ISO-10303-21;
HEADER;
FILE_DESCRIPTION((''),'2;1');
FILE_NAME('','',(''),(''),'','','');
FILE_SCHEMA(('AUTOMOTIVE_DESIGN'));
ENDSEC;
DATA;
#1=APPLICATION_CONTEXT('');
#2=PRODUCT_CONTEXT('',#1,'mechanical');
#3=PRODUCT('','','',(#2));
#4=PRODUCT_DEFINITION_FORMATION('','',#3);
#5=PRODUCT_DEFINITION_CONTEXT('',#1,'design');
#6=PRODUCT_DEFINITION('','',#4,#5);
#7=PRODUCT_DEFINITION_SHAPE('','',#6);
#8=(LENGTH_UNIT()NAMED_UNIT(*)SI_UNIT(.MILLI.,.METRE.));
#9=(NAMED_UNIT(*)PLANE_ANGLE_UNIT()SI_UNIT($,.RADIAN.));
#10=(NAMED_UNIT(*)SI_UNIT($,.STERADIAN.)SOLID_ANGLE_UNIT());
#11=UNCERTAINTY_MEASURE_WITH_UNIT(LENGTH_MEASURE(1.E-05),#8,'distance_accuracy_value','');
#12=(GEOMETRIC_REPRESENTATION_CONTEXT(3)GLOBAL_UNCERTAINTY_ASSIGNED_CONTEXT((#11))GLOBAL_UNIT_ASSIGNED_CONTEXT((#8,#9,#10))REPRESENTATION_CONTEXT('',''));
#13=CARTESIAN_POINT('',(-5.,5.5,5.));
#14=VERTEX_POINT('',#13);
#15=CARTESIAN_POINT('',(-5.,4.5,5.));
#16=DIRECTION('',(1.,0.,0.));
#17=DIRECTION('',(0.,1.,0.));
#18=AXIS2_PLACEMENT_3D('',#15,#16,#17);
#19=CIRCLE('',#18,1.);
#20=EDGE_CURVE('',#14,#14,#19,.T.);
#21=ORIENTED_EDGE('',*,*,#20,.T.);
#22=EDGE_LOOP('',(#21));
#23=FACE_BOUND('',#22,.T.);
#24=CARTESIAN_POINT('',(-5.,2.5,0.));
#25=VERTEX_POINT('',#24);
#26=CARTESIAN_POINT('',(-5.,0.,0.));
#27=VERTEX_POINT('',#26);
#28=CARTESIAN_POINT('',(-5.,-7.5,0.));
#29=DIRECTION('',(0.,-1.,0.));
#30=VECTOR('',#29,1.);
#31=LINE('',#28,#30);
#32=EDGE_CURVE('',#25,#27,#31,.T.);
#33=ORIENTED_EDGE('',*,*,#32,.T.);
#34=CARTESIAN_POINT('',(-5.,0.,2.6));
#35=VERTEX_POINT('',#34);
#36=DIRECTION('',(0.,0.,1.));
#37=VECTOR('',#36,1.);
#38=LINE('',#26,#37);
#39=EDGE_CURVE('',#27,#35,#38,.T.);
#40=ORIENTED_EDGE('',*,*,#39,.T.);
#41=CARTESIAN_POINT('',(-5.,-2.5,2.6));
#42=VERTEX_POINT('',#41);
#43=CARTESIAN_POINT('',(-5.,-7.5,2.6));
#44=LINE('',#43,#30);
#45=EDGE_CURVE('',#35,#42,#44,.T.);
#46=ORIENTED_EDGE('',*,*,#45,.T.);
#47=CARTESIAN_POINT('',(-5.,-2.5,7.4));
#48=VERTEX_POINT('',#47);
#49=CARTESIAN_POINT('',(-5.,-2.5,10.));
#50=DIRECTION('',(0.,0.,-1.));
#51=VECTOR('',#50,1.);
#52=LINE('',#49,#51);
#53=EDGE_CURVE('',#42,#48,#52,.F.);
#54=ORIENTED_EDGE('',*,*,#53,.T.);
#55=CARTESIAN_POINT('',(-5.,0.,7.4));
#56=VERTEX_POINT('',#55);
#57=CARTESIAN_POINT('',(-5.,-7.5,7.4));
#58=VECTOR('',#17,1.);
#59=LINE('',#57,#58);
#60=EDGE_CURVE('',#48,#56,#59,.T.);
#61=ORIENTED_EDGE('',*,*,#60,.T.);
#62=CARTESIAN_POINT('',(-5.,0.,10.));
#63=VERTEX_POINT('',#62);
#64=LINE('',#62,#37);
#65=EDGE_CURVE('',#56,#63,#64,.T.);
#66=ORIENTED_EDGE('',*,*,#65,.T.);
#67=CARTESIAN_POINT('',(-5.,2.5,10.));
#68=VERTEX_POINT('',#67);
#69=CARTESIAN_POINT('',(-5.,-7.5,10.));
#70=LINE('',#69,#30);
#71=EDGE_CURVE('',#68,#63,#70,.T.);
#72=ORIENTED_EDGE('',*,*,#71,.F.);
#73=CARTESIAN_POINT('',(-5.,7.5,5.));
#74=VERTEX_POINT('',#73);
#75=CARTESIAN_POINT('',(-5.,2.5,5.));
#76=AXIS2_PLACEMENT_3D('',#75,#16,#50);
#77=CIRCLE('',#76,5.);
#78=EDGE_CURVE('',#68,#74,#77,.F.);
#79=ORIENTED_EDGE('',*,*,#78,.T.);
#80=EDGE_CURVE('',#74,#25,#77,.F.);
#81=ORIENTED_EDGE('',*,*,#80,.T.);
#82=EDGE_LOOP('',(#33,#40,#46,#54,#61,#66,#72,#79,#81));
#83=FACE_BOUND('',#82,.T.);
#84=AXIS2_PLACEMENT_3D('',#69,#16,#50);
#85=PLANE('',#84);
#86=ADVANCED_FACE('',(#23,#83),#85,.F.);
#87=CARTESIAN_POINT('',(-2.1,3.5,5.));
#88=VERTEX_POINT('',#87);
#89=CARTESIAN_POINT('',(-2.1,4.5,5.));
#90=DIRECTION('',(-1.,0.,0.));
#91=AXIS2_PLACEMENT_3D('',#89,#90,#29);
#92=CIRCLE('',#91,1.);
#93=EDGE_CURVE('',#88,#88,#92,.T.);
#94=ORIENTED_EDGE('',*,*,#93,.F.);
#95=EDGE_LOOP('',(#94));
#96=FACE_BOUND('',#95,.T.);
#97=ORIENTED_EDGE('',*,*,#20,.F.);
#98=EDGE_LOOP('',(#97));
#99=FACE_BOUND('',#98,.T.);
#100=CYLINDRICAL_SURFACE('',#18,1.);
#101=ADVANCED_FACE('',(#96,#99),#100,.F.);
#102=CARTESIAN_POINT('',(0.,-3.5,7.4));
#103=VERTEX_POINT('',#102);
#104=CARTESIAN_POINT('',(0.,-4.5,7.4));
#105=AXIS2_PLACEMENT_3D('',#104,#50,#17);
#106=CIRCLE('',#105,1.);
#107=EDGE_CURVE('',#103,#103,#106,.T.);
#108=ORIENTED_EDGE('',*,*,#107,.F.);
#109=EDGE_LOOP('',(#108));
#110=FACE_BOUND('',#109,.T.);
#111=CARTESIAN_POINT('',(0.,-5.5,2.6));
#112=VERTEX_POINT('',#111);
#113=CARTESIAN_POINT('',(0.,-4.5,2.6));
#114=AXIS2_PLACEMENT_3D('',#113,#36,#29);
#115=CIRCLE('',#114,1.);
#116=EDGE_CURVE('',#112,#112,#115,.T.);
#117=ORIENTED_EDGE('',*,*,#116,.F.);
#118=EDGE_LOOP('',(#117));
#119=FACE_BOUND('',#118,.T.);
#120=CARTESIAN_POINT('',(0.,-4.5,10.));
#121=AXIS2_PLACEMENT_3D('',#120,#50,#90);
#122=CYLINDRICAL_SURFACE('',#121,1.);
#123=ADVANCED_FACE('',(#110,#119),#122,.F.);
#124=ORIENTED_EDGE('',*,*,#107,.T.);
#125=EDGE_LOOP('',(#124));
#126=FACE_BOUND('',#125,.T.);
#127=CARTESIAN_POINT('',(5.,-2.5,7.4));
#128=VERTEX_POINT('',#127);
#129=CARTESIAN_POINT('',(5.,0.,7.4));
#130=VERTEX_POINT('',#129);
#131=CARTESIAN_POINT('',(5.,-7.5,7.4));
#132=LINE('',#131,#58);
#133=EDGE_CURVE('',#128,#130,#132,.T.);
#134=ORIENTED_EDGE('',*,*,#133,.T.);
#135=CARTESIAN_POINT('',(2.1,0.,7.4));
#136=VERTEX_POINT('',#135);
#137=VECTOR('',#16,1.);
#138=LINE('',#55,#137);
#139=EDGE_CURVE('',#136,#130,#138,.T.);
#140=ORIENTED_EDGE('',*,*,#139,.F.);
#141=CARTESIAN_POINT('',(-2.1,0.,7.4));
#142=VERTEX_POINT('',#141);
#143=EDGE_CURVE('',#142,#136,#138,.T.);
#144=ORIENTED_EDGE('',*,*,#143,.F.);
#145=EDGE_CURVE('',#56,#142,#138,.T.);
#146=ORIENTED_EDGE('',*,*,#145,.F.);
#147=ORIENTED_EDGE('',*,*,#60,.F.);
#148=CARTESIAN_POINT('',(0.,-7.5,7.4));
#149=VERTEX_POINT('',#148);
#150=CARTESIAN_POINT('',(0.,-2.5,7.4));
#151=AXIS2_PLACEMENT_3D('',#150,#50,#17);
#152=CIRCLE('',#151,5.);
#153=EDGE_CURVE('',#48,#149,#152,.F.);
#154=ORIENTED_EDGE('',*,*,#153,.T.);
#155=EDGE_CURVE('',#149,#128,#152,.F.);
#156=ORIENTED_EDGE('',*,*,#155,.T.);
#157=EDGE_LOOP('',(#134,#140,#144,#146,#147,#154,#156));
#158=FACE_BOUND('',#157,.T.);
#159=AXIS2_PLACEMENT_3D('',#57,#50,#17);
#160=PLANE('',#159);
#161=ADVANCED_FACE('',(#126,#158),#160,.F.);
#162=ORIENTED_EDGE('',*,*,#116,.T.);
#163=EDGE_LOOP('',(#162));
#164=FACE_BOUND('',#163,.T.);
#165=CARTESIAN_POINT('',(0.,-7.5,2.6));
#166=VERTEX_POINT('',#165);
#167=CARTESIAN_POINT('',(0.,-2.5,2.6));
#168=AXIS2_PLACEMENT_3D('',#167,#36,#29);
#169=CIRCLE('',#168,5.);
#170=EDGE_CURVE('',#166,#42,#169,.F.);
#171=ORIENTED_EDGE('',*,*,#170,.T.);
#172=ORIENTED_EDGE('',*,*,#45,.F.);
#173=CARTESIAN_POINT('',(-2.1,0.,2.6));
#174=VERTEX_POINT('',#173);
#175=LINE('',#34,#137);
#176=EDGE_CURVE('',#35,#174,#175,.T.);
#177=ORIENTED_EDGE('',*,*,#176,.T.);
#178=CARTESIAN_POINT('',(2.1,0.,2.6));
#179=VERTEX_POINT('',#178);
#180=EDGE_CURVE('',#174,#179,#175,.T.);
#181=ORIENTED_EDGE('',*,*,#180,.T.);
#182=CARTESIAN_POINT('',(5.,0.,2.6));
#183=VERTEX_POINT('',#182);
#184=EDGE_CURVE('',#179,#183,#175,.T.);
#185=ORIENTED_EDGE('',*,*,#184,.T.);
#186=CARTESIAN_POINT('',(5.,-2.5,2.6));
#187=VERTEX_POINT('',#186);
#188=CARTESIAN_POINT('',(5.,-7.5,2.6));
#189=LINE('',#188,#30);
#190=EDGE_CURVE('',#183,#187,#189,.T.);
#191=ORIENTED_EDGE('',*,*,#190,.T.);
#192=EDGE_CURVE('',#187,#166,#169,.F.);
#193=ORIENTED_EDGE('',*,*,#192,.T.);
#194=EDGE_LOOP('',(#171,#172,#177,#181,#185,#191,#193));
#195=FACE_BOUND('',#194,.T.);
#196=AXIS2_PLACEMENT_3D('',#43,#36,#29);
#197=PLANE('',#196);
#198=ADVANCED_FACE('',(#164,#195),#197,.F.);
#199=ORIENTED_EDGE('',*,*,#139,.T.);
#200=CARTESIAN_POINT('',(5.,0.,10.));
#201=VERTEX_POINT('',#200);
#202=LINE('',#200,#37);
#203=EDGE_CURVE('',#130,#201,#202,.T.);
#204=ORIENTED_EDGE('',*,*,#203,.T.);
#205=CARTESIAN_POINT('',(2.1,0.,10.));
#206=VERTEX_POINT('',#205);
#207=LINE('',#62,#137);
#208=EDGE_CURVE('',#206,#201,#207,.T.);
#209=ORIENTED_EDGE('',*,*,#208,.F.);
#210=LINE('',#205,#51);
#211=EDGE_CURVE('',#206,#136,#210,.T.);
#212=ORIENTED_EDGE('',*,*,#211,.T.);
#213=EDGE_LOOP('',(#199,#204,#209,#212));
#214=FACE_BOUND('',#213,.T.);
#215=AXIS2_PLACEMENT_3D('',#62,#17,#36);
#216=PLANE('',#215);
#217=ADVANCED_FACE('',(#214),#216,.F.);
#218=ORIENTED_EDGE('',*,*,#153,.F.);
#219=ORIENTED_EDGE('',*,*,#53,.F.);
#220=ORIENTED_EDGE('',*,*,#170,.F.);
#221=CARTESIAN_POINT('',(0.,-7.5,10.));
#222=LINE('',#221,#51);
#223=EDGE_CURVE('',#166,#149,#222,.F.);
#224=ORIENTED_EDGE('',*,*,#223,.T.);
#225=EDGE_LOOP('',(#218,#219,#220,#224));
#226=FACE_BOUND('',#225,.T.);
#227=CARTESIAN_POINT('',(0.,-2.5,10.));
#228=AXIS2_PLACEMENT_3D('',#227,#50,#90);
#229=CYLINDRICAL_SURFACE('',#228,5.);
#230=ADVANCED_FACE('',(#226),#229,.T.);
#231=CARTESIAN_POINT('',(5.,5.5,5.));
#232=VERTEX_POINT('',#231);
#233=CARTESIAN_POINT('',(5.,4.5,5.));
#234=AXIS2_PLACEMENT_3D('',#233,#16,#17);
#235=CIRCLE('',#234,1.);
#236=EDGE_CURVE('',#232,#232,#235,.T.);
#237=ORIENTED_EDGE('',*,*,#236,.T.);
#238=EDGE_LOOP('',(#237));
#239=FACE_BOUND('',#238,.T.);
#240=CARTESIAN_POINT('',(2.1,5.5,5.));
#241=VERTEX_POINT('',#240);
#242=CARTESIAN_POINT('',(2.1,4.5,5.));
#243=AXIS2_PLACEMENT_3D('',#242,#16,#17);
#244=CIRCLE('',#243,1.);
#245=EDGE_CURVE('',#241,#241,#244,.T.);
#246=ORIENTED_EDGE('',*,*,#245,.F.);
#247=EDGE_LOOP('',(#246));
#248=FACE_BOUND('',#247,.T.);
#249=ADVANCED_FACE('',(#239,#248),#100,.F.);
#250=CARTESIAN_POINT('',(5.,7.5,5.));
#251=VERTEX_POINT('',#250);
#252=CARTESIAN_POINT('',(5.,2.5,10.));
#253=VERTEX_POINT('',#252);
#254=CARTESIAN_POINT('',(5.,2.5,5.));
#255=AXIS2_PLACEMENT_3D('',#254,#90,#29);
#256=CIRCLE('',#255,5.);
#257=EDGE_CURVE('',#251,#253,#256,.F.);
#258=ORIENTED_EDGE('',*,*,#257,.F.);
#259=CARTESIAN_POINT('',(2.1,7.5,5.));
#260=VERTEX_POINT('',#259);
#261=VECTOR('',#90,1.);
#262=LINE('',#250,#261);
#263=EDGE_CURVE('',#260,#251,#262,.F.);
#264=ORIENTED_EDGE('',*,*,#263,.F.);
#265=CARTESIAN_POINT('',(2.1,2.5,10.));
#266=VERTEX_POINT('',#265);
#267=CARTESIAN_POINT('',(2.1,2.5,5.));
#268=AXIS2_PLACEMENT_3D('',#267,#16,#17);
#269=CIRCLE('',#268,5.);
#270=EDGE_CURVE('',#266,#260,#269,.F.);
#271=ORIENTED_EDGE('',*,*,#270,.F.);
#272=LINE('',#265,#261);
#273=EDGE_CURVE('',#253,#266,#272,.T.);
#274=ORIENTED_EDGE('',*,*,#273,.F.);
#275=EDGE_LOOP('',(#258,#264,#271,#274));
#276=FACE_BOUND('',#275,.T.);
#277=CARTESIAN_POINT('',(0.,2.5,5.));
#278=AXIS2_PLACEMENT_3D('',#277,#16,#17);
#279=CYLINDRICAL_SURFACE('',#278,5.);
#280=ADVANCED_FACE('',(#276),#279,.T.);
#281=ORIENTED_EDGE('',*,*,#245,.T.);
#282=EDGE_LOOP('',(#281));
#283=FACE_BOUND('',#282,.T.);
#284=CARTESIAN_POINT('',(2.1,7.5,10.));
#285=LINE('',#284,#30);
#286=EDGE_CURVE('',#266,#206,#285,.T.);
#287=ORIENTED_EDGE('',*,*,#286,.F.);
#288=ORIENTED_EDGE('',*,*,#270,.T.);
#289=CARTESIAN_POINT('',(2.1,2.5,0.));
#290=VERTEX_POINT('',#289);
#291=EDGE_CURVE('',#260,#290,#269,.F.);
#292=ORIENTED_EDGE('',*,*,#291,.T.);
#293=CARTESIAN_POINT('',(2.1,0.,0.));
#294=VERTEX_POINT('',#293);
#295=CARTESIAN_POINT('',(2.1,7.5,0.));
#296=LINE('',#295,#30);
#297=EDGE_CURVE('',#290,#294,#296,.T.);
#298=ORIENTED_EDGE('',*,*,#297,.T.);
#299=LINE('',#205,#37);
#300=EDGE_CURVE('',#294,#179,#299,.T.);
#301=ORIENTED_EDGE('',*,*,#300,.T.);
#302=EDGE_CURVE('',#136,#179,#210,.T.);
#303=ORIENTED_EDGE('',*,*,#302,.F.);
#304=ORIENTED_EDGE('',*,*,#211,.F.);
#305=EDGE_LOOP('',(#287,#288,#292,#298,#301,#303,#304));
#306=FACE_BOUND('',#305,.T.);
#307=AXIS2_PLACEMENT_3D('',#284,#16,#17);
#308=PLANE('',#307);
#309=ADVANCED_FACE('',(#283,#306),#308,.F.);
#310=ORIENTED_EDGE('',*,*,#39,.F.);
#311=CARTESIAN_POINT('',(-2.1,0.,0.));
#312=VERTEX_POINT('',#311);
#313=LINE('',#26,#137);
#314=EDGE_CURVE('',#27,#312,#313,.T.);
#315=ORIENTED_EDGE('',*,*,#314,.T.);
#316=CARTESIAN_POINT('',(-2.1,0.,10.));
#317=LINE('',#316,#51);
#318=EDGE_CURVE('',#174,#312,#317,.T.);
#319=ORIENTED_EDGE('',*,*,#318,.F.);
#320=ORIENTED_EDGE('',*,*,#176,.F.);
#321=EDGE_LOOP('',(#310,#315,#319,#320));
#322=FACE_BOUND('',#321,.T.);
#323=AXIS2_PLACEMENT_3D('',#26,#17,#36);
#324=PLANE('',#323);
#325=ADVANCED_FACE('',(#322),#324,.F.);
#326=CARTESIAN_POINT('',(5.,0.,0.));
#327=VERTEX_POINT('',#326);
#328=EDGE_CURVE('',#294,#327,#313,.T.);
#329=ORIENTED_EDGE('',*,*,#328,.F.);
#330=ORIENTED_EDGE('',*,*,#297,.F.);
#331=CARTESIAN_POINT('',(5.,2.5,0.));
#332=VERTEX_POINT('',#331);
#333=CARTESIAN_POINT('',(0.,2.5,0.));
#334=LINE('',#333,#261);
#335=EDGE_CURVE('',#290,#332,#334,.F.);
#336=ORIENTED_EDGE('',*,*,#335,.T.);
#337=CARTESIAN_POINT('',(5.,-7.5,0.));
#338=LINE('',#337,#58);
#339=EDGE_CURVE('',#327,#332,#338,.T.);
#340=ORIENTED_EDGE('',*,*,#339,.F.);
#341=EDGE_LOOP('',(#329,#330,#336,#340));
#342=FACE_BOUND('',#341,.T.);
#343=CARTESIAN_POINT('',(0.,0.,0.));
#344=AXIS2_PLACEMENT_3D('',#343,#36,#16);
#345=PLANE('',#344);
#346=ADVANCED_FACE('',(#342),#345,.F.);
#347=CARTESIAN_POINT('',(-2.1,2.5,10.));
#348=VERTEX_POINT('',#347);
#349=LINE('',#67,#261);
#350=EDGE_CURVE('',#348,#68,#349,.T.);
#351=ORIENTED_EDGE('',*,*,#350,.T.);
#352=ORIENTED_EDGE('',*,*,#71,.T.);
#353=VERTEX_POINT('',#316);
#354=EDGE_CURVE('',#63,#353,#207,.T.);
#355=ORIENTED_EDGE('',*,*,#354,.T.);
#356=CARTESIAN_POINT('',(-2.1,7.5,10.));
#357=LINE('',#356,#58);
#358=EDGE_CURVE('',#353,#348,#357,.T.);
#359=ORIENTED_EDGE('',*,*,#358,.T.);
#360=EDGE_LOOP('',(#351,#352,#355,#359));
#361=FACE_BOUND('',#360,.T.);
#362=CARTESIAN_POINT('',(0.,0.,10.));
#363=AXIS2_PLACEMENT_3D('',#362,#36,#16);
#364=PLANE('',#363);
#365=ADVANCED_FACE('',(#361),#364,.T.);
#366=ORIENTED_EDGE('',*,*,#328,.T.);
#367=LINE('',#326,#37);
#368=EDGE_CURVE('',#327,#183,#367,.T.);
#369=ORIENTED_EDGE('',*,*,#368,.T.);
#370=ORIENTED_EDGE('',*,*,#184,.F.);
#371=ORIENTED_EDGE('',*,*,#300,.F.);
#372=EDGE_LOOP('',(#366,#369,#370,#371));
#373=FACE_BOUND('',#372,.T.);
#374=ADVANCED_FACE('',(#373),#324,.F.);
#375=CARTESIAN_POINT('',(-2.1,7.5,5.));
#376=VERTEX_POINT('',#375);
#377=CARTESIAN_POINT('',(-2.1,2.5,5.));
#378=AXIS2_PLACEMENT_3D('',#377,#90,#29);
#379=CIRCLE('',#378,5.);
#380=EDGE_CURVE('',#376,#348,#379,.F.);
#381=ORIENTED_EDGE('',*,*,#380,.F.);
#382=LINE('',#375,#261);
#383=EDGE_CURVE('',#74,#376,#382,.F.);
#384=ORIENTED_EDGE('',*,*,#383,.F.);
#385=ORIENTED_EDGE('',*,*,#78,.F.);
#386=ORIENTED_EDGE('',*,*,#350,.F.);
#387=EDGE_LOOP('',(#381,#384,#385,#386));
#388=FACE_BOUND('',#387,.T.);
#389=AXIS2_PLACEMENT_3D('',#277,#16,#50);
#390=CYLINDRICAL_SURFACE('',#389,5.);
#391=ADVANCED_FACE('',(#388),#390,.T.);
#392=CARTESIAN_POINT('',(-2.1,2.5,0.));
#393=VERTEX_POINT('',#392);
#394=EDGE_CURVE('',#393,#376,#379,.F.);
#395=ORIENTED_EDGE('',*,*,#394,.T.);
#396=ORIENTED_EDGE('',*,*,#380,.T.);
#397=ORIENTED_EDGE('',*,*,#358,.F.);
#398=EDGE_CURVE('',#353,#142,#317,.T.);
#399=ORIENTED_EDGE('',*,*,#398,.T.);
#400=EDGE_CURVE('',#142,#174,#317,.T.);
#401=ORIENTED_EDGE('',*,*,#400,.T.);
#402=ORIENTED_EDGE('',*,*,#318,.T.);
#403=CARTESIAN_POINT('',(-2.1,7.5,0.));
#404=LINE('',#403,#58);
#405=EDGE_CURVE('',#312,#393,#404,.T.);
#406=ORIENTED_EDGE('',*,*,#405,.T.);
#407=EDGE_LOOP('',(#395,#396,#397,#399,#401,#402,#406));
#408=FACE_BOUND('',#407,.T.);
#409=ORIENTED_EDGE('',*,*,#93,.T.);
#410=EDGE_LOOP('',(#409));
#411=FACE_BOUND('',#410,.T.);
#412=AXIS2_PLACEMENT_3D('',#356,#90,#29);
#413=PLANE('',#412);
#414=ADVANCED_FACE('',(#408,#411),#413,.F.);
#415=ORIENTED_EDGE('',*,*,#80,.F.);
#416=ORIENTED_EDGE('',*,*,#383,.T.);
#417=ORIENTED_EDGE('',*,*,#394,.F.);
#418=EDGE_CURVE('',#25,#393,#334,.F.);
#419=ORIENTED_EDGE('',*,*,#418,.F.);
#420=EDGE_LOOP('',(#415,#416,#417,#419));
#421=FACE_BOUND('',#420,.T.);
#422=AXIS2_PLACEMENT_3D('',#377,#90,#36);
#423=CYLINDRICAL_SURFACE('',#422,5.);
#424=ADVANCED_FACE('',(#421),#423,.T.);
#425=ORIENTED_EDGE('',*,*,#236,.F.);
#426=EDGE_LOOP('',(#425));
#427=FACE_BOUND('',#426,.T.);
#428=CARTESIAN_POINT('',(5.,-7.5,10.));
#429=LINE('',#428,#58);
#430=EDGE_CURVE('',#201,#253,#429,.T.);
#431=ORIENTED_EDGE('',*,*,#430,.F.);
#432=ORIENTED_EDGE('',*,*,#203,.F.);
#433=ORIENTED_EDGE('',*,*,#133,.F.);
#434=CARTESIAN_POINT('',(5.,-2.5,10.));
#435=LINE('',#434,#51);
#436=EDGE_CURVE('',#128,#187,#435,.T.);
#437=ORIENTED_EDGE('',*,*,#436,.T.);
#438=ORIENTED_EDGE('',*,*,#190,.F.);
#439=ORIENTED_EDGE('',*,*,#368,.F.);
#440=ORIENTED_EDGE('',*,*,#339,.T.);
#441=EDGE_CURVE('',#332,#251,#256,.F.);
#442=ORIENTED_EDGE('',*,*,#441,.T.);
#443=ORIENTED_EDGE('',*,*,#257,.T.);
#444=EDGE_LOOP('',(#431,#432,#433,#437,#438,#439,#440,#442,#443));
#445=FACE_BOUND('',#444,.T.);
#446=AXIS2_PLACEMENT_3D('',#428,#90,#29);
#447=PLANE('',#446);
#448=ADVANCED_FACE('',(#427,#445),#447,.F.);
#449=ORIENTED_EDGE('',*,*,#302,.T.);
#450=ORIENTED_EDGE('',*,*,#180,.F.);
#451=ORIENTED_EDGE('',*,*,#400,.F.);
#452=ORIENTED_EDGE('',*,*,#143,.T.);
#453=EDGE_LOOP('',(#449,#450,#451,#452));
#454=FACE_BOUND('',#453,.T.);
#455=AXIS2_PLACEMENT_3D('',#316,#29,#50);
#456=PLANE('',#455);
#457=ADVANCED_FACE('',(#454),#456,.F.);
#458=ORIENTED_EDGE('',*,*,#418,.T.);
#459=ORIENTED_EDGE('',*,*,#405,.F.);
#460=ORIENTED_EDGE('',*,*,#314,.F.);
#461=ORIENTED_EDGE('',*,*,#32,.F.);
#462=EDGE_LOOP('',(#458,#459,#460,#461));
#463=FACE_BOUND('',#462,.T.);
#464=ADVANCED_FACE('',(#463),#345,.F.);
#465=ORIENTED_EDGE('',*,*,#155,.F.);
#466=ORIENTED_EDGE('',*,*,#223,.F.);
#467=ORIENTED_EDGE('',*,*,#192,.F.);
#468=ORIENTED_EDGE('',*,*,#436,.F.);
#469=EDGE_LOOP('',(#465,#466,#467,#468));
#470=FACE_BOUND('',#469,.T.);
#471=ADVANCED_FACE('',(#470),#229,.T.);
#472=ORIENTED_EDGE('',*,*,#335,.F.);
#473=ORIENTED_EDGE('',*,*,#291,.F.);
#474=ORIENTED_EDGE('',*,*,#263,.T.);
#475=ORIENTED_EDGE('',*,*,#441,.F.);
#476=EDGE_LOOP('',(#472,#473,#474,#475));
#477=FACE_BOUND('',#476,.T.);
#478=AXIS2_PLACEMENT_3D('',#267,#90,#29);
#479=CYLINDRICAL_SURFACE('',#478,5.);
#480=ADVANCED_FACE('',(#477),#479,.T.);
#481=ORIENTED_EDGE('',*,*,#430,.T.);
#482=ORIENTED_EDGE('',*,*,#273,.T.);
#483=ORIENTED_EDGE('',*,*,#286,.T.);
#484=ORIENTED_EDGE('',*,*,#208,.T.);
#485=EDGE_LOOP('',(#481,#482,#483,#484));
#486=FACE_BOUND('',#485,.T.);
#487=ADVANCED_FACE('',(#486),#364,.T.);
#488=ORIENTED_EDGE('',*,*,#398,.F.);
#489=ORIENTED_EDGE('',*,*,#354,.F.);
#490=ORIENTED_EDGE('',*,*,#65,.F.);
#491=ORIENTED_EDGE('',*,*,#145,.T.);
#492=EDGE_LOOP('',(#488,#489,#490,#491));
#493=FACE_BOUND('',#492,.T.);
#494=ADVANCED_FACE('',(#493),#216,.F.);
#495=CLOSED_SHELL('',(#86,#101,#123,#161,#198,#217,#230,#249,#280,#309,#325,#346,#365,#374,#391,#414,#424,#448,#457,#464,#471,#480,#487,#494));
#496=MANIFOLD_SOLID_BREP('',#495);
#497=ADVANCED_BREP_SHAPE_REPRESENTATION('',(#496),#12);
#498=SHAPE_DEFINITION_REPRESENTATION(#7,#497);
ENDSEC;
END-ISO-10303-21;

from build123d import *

# Parameters (mm, degrees)
SKETCH1_R           = 1
BOSS_EXTRUDE1_DEPTH = 10
SKETCH2_R           = 1
SKETCH2_W           = 2.6
SKETCH2_H           = 7.5
CUT_EXTRUDE1_DEPTH  = 10
FILLET1_R           = 5


with BuildPart() as part:
    # Sketch1 → Boss-Extrude1 (new body)
    with BuildSketch(Plane.XY):
        Polygon((-5, -7.5), (5, -7.5), (5, 7.5), (2.1, 7.5), (2.1, 0), (-2.1, 0), (-2.1, 7.5), (-5, 7.5), align=None)
        with Locations((0, -4.5)):
            Circle(SKETCH1_R, mode=Mode.SUBTRACT)
    extrude(amount=BOSS_EXTRUDE1_DEPTH)

    # Sketch2 → Cut-Extrude1 (cut)
    with BuildSketch(Plane(origin=(5, 0, 0), x_dir=(0, 0, -1), z_dir=(1, 0, 0))):
        with Locations(Location((-5, 4.5, 0), (0, 0, 90))):
            Circle(SKETCH2_R)
        with Locations((-8.7, -3.75)):
            Rectangle(SKETCH2_W, SKETCH2_H)
        with Locations((-1.3, -3.75)):
            Rectangle(SKETCH2_W, SKETCH2_H)
    extrude(amount=-CUT_EXTRUDE1_DEPTH, mode=Mode.SUBTRACT)

    # Fillet1
    fillet1_edges = [part.edges().sort_by_distance(p)[0] for p in [
        (-5, -7.5, 5),
        (5, -7.5, 5),
        (-3.55, 7.5, 0),
        (3.55, 7.5, 0),
        (3.55, 7.5, 10),
        (-3.55, 7.5, 10),
    ]]
    fillet(fillet1_edges, radius=FILLET1_R - 0.0001)  # a hair under: the kernel refuses the full size


solid = part.part
